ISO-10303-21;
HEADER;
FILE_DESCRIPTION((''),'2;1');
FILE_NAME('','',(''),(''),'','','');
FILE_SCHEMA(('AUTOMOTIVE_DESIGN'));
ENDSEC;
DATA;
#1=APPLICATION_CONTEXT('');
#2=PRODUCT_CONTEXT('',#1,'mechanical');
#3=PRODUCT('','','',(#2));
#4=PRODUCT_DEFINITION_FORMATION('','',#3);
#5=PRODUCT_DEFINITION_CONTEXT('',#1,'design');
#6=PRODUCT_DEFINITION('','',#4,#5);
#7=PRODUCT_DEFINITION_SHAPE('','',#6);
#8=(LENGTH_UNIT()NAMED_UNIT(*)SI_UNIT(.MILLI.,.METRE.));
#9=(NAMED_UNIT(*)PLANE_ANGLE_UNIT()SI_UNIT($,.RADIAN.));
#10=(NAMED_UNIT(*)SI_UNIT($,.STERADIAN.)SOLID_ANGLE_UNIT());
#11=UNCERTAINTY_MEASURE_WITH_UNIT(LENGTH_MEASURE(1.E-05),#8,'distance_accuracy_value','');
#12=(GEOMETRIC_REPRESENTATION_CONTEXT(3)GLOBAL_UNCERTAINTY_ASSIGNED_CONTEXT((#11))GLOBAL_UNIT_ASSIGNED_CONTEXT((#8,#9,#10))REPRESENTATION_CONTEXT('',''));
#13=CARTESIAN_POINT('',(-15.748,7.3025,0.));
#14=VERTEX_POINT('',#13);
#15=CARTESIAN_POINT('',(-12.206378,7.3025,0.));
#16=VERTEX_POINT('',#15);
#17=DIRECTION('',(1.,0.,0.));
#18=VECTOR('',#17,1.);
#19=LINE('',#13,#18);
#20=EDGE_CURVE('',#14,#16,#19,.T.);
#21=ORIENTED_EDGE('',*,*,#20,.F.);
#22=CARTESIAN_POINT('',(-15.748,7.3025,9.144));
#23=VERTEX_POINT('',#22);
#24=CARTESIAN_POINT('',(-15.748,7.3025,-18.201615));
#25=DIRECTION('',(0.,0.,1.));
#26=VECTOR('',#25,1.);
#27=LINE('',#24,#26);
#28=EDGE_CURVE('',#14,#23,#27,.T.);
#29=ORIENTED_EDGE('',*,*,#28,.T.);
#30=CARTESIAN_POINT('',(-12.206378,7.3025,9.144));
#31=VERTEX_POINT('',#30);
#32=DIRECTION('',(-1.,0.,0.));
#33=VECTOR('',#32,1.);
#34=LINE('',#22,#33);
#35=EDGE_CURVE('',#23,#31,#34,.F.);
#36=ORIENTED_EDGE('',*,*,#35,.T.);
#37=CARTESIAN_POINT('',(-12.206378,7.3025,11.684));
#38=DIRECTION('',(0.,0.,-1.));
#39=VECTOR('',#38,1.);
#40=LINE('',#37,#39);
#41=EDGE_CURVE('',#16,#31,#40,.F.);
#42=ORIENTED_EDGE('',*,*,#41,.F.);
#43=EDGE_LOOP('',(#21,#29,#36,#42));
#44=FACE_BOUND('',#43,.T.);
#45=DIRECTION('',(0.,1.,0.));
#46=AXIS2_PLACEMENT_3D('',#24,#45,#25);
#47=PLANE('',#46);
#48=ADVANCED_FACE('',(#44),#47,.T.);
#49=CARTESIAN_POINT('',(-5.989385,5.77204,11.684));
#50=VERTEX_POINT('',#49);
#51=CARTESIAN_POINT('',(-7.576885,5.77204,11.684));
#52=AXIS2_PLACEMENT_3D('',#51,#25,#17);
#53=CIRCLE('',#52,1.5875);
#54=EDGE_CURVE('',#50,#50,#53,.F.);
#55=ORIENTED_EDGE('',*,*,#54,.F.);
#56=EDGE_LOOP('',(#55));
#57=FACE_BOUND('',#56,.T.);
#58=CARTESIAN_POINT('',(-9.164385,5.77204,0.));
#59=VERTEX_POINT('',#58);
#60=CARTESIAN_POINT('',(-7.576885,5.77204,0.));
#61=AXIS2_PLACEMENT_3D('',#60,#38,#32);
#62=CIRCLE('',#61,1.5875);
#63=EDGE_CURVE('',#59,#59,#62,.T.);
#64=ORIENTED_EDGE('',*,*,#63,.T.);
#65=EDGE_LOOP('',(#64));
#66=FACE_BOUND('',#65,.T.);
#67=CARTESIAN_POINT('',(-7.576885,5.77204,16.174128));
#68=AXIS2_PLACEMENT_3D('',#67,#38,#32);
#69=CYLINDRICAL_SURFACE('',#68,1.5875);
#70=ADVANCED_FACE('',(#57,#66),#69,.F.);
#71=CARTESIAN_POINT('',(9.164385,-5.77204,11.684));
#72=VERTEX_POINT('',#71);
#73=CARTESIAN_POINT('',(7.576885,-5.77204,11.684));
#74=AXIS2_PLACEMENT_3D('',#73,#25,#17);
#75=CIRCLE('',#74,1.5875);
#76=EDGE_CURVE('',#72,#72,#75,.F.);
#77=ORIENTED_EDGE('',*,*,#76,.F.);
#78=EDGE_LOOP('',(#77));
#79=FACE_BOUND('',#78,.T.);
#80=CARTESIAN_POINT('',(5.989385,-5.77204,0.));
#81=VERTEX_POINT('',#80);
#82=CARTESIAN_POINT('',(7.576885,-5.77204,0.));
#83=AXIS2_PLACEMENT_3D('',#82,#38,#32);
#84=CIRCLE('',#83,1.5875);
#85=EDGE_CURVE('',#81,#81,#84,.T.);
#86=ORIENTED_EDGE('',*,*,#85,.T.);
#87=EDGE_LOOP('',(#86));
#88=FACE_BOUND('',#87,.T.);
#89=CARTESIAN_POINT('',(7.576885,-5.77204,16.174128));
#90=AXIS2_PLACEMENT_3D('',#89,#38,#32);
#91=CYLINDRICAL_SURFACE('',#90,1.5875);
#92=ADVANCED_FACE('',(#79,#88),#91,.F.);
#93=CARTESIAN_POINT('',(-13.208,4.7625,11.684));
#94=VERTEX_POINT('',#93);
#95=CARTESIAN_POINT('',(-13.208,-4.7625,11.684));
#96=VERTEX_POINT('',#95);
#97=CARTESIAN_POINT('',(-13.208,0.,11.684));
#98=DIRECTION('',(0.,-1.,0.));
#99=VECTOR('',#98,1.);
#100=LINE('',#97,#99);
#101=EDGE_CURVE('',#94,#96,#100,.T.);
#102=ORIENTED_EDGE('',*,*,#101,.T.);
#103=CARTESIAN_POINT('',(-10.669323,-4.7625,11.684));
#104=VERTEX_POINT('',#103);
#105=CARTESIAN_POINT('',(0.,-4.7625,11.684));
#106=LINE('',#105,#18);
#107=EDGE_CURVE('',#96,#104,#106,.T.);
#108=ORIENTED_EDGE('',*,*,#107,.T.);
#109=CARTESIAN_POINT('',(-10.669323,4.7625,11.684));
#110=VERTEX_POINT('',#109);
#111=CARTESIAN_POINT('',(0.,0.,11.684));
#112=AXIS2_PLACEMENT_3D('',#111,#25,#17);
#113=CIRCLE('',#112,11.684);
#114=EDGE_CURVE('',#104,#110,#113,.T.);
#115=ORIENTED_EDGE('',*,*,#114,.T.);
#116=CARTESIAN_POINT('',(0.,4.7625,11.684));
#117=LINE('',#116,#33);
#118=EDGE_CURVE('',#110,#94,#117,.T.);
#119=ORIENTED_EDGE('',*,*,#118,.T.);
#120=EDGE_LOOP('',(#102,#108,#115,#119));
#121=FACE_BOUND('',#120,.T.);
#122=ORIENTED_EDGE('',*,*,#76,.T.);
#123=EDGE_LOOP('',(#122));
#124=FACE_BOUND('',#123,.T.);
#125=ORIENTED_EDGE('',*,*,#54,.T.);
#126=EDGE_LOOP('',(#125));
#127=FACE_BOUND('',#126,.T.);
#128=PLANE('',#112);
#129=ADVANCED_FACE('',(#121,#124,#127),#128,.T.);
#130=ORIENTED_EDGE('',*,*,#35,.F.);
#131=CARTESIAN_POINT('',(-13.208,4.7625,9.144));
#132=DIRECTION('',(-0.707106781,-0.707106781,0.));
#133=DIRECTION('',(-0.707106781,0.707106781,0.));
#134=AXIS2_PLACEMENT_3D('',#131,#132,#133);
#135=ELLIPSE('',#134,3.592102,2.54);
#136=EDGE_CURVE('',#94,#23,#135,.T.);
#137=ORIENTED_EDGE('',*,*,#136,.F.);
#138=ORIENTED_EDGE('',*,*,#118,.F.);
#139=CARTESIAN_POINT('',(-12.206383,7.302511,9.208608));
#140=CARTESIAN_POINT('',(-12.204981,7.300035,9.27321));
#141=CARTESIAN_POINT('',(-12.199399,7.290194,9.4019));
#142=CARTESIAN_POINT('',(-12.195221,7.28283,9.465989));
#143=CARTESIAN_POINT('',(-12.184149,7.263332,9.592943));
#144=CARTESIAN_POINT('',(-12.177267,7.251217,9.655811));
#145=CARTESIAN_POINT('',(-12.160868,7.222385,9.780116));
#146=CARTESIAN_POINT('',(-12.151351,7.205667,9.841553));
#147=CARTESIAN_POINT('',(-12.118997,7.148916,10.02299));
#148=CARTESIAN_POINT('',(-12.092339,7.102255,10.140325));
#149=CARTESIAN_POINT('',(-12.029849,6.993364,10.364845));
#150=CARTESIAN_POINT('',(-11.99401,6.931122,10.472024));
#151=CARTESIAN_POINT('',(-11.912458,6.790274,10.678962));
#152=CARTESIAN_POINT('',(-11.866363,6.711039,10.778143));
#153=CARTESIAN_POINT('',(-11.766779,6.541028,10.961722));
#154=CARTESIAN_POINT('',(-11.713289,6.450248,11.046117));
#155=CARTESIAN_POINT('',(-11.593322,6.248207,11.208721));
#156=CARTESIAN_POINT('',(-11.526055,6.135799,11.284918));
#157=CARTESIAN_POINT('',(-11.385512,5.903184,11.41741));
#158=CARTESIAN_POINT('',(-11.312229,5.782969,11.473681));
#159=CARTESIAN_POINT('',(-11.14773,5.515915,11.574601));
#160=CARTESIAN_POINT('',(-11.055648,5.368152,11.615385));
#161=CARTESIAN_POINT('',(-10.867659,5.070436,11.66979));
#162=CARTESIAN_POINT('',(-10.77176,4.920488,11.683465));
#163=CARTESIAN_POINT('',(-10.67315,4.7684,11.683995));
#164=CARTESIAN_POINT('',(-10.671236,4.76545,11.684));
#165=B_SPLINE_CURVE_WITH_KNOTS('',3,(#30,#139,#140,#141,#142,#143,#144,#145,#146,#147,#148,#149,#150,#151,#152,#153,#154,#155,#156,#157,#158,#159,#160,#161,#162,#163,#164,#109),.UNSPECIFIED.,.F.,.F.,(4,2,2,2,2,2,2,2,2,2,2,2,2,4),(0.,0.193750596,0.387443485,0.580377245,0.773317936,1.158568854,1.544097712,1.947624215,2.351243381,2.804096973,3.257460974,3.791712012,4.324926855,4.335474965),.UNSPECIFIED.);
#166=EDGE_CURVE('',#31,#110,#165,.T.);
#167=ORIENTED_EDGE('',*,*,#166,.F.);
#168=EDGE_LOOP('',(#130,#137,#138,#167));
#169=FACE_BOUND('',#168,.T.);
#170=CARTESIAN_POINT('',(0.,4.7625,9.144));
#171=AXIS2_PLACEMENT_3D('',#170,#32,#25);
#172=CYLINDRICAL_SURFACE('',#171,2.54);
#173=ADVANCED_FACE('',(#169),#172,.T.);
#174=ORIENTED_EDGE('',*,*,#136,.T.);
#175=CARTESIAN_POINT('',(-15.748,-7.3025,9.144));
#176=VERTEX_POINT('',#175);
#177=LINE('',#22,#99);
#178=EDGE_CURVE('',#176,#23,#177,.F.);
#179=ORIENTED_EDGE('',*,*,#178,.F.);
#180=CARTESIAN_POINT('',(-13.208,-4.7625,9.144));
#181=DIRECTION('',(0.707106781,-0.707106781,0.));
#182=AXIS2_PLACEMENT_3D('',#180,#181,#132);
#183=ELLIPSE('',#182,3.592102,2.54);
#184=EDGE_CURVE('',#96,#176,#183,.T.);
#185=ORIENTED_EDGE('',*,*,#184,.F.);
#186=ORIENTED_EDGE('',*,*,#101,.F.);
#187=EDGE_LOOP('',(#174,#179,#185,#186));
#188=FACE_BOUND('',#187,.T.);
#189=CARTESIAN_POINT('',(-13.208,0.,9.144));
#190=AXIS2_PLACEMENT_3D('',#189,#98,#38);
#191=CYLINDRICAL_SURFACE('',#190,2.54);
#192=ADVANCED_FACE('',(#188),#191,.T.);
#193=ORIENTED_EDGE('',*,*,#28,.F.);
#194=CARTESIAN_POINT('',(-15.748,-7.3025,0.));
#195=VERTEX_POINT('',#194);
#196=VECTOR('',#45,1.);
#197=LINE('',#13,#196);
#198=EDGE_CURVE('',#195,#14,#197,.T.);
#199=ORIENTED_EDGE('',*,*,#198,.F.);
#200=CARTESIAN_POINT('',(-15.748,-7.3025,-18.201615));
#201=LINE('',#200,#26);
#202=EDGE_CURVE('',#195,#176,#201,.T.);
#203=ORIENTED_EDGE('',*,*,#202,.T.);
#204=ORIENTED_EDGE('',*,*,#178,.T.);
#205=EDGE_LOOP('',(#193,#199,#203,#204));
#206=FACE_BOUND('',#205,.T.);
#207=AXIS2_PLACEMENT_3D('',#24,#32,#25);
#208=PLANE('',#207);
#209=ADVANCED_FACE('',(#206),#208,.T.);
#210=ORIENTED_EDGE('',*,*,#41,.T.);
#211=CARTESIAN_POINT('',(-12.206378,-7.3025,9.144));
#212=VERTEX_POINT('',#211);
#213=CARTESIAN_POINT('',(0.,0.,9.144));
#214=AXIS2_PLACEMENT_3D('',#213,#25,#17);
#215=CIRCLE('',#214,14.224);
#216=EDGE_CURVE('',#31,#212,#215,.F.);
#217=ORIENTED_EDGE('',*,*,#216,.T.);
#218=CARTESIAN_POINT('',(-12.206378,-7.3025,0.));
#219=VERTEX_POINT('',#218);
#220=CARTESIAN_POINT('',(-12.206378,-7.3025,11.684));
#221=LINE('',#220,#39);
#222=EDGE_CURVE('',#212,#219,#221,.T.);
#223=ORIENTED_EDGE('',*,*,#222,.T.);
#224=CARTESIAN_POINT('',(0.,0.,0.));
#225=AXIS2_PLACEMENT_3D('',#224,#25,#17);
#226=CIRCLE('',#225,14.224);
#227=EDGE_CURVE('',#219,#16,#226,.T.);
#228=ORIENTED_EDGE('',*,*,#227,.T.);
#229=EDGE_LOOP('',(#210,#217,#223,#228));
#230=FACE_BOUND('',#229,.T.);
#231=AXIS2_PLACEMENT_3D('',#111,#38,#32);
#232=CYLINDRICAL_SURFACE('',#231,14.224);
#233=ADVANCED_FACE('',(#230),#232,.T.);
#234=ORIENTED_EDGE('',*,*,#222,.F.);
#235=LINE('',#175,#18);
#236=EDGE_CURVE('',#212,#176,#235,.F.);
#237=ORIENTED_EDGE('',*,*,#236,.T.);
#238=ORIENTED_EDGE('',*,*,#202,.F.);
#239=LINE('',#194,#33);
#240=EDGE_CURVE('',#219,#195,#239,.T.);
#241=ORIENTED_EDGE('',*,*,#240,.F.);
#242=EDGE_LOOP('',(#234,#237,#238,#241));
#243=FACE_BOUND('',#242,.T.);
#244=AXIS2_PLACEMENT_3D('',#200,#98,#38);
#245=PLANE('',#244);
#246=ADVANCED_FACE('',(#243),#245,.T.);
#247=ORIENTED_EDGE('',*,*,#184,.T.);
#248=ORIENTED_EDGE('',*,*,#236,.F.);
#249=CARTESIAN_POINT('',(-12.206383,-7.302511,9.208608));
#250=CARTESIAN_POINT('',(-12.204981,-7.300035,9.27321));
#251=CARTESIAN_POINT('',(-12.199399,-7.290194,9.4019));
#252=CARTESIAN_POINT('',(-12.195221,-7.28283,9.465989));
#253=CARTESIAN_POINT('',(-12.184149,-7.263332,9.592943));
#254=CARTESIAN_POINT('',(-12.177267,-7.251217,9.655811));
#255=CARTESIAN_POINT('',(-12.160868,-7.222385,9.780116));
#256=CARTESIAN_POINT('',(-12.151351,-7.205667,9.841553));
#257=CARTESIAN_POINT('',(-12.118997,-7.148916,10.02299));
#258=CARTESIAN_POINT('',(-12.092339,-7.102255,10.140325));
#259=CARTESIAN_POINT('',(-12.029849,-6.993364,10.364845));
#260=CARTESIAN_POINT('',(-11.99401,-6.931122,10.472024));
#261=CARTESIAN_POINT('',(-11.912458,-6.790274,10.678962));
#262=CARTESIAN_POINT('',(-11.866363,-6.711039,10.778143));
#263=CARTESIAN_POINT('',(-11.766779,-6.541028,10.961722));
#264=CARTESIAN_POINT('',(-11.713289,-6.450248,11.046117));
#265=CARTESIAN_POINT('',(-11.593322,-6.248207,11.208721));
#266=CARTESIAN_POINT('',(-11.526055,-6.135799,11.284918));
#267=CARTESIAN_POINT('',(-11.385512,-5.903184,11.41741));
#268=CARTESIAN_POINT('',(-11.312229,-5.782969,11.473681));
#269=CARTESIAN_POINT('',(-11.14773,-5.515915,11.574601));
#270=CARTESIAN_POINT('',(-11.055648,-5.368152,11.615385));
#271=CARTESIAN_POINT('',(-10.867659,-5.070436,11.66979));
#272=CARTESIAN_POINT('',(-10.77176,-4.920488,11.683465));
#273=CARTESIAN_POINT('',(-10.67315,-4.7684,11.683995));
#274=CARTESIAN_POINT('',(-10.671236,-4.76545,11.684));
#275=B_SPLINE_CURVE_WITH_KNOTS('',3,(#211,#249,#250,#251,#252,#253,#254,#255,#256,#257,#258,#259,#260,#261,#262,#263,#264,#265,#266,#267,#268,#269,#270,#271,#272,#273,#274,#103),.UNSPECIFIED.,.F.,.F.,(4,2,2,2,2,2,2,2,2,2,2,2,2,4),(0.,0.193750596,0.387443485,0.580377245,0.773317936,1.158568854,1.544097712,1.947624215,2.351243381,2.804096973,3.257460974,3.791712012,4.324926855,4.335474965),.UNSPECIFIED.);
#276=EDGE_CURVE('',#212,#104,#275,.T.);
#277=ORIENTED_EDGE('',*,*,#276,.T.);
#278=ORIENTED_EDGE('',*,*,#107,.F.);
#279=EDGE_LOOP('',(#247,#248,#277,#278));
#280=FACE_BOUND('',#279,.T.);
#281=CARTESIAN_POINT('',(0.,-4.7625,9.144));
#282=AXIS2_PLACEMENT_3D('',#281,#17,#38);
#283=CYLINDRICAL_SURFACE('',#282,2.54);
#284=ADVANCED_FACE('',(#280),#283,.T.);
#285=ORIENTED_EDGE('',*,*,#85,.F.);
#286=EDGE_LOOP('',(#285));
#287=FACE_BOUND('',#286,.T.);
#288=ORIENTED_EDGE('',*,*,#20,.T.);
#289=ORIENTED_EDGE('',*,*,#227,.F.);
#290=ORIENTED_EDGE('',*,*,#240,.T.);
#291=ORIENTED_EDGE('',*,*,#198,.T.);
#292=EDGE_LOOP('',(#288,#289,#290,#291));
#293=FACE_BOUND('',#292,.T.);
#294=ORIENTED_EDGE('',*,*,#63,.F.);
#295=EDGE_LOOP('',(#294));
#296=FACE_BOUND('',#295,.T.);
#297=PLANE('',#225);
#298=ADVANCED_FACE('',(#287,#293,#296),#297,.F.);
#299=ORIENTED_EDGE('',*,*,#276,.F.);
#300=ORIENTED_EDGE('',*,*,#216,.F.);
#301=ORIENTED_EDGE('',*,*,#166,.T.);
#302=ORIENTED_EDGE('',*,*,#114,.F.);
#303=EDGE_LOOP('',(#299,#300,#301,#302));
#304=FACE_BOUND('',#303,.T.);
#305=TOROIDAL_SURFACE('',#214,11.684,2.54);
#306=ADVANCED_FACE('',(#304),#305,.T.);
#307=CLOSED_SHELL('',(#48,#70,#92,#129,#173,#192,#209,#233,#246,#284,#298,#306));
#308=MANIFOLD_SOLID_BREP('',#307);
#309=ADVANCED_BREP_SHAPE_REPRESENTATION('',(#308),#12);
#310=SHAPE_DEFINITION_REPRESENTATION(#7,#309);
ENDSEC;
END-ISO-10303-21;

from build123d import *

# Parameters (mm, degrees)
SKETCH1_R           = 14.224
BOSS_EXTRUDE1_DEPTH = 11.684
SKETCH2_W           = 10.862447087
SKETCH2_H           = 14.605
BOSS_EXTRUDE2_DEPTH = 11.684
FILLET1_R           = 2.54
SKETCH3_R           = 1.5875
CUT_EXTRUDE1_DEPTH  = 11.684


with BuildPart() as part:
    # Sketch1 → Boss-Extrude1 (new body)
    with BuildSketch(Plane.XY):
        Circle(SKETCH1_R)
    extrude(amount=BOSS_EXTRUDE1_DEPTH)

    # Sketch2 → Boss-Extrude2 (add)
    with BuildSketch(Plane.XY.offset(11.684)):
        with Locations((-10.316776457, 0)):
            Rectangle(SKETCH2_W, SKETCH2_H)
    extrude(amount=-BOSS_EXTRUDE2_DEPTH)

    # Fillet1
    fillet1_edges = [part.edges().sort_by_distance(p)[0] for p in [
        (-13.97718912, 7.3025, 11.684),
        (-15.748, 0, 11.684),
        (-13.97718912, -7.3025, 11.684),
        (14.224, 0, 11.684),
    ]]
    fillet(fillet1_edges, radius=FILLET1_R - 0.0001)  # a hair under: the kernel refuses the full size

    # Sketch3 → Cut-Extrude1 (cut)
    with BuildSketch(Plane(origin=(0, 0, 0), x_dir=(-1, 0, 0), z_dir=(0, 0, -1))):
        with Locations((7.576884905, 5.772039513)):
            Circle(SKETCH3_R)
        with Locations((-7.576884905, -5.772039513)):
            Circle(SKETCH3_R)
    extrude(amount=-CUT_EXTRUDE1_DEPTH, mode=Mode.SUBTRACT)


solid = part.part
